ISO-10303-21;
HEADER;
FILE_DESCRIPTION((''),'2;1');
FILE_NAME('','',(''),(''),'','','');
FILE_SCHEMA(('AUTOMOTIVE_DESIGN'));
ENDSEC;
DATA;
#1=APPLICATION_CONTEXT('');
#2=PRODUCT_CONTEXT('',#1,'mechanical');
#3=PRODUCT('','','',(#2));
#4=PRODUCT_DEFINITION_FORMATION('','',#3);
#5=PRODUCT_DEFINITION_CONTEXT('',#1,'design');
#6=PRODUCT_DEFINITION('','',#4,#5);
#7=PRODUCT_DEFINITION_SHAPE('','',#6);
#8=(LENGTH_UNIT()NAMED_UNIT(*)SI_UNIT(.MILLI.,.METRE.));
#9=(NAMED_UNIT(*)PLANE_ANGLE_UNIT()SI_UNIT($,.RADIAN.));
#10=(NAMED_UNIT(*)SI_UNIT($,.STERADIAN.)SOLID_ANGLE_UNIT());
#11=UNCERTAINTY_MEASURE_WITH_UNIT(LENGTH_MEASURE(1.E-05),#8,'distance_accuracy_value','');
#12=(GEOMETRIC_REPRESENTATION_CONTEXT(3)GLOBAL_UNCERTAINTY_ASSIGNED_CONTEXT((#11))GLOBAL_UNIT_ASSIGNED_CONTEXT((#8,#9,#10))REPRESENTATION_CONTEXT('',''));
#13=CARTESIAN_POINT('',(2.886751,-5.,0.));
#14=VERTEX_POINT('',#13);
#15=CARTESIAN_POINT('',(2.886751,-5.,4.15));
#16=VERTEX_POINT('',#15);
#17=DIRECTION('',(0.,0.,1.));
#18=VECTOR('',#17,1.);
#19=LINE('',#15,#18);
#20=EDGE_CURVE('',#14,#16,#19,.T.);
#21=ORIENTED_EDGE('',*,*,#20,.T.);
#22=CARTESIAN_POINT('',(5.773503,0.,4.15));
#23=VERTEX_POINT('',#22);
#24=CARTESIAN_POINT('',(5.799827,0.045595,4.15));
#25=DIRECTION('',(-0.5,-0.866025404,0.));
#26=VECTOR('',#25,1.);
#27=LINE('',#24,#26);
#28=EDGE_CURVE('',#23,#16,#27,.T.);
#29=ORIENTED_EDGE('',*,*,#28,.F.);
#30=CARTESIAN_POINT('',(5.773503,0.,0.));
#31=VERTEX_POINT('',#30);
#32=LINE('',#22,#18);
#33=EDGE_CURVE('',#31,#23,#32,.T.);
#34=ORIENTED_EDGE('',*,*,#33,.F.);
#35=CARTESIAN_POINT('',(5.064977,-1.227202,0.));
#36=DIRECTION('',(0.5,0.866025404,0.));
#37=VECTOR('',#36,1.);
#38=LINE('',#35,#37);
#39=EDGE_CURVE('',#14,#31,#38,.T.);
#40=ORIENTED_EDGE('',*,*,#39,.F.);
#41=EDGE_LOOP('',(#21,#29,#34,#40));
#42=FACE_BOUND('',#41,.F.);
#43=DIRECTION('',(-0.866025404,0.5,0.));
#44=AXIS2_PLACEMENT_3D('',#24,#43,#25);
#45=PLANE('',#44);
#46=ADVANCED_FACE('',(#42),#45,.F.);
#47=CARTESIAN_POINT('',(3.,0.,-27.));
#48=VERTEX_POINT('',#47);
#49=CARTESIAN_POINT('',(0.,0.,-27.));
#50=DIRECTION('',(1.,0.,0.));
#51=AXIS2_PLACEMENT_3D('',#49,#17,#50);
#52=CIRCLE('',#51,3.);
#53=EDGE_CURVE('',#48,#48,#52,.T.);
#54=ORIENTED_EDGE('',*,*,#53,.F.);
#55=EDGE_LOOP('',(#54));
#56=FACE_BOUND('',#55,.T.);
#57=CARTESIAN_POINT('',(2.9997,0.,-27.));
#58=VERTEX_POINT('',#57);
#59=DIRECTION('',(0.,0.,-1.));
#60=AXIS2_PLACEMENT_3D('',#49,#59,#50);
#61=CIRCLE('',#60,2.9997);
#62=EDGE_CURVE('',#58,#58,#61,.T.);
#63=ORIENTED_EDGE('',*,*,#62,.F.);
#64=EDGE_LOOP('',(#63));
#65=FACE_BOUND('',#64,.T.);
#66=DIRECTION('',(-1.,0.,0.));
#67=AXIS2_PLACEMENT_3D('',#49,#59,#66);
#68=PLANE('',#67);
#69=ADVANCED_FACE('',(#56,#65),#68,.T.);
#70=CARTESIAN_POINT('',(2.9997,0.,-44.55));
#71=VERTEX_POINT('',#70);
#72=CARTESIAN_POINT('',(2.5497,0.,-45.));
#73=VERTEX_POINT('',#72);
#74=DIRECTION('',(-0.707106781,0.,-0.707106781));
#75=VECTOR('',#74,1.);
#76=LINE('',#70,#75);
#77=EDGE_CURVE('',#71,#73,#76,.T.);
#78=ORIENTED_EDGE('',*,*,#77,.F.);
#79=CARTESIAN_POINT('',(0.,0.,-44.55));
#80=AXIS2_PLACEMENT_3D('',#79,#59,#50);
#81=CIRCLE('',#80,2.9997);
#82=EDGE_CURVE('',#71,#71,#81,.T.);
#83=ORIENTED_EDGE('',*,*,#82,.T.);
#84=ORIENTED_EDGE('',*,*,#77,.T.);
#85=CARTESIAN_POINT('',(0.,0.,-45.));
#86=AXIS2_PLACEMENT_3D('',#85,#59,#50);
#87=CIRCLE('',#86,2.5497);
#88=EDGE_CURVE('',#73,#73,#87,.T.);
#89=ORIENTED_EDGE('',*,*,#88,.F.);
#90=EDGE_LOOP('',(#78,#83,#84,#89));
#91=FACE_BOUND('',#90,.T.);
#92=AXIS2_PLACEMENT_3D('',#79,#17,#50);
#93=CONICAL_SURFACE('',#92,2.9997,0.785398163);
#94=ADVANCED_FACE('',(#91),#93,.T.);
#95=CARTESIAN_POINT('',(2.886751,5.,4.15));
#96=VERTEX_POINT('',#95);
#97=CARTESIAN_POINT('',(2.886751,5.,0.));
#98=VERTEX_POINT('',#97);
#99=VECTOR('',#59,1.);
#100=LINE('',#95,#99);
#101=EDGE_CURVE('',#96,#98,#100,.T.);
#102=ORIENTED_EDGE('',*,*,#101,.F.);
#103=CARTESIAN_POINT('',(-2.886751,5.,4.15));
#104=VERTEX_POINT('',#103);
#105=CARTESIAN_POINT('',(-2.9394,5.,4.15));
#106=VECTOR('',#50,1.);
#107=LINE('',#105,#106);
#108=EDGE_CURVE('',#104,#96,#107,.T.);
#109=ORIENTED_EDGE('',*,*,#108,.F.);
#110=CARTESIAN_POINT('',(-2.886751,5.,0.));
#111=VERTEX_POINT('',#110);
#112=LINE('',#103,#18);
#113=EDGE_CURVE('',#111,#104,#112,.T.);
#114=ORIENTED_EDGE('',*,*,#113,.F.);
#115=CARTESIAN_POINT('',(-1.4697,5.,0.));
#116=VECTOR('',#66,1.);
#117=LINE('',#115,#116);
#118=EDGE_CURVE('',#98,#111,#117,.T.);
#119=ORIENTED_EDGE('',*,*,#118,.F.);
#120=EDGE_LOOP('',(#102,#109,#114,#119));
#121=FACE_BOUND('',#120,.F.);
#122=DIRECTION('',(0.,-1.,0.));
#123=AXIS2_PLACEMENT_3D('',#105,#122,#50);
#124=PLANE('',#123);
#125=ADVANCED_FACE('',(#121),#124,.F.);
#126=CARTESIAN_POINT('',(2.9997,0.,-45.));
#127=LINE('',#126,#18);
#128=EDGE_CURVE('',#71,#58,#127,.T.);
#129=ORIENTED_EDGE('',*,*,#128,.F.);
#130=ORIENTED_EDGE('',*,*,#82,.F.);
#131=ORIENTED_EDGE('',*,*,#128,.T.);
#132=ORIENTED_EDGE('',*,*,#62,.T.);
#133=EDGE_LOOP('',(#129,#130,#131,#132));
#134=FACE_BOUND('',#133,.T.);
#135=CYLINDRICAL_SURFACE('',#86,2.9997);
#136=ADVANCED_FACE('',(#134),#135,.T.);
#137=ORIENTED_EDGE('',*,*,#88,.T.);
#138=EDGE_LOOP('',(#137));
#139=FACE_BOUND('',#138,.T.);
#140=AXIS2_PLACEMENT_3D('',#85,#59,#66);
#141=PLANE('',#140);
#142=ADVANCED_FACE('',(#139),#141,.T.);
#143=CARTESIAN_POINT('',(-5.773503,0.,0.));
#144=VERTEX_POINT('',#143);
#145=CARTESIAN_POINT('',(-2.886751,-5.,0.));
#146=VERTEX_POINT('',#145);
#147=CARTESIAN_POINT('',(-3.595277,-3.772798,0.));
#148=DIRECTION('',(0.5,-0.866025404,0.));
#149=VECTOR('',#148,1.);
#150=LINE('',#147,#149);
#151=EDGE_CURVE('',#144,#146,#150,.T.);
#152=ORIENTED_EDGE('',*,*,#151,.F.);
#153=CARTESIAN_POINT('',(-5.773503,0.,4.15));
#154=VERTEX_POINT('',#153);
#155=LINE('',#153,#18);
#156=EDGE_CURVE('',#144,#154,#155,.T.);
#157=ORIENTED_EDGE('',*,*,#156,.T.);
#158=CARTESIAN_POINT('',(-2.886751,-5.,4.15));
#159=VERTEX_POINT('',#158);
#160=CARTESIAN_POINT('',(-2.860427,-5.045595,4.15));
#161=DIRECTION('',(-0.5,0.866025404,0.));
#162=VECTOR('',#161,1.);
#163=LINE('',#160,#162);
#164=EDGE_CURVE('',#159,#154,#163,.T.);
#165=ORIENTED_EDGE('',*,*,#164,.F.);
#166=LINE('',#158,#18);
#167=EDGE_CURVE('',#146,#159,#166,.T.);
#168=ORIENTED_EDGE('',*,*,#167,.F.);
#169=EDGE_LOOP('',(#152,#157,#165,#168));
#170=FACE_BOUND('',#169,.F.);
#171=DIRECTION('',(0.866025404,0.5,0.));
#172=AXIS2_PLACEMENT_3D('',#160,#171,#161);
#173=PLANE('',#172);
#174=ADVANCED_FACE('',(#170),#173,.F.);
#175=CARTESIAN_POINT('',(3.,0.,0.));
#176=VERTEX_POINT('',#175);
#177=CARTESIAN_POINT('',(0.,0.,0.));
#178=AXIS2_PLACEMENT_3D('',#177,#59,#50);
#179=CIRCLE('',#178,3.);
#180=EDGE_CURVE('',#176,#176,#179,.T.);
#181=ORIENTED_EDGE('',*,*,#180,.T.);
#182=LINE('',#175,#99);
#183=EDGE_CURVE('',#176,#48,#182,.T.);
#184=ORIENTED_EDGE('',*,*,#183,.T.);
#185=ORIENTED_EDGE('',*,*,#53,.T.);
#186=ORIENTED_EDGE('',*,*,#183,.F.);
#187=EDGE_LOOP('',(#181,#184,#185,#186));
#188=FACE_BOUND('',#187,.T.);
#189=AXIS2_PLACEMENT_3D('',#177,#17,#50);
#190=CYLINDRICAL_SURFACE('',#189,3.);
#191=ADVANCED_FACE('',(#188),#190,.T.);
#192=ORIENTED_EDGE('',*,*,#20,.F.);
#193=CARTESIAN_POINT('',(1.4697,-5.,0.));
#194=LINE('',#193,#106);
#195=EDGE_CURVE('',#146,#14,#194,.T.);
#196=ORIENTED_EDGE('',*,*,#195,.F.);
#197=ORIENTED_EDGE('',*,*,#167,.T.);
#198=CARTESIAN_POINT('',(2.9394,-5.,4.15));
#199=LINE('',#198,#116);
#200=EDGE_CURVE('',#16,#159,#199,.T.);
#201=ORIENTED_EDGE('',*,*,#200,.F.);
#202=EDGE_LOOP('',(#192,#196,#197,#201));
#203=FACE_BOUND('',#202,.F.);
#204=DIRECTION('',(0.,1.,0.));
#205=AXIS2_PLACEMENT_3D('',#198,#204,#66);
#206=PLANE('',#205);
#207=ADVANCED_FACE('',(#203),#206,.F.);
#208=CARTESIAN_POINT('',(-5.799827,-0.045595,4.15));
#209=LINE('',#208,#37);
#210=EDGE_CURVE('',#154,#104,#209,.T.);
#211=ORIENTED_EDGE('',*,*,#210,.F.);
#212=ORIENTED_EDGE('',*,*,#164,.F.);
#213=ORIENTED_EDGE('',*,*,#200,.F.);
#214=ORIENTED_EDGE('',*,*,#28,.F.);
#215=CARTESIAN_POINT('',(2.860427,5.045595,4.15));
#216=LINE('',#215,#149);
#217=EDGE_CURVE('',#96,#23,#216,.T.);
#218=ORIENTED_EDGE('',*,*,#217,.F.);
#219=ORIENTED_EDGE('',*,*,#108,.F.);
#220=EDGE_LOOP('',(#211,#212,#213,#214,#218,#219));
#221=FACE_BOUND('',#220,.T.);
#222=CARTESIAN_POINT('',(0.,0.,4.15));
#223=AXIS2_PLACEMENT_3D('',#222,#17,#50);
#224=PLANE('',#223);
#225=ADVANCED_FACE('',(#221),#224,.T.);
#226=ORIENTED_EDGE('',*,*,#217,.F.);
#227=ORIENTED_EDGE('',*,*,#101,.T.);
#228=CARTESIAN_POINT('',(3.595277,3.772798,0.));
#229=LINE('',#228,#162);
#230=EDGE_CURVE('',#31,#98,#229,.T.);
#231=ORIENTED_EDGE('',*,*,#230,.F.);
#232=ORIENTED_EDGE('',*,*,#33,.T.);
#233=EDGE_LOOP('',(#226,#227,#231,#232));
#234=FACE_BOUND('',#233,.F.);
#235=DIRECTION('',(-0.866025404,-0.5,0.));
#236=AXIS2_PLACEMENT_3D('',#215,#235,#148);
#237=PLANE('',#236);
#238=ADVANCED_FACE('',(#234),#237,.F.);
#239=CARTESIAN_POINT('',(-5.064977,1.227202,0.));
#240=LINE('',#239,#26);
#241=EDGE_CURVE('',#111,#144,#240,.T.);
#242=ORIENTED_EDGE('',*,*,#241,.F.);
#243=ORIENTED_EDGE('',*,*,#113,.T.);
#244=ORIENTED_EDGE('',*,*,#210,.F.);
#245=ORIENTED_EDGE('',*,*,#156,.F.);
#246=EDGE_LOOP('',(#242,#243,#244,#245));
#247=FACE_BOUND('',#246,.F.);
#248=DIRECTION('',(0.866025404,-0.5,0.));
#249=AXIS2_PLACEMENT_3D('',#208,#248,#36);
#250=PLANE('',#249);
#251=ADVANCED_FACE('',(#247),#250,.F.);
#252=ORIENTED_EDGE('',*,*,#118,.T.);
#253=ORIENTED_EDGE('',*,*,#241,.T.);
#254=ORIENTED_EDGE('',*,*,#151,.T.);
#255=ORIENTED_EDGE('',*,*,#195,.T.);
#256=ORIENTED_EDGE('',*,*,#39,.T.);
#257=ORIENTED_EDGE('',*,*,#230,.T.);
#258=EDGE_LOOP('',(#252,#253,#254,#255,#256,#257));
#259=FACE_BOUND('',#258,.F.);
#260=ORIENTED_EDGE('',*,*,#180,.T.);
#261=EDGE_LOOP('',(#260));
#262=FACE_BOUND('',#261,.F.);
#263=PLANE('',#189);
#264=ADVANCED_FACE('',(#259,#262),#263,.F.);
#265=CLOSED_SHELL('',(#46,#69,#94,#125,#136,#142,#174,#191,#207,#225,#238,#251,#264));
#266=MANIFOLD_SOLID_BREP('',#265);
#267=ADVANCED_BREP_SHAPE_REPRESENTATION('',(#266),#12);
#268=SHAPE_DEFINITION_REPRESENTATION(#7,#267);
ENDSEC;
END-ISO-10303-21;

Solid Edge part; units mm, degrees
sketch "Sketch1" plane through (0, 0, 0) normal (0, 0, 1) x (1, 0, 0)
  circle A0 centre (0, 0) radius 5.8
  dimension "D1" = 11.6
extrude "Protrusion1" add sketch "Sketch1" along normal blind 4.15
sketch "Sketch2" plane through (0, 0, 0) normal (0, 0, -1) x (1, 0, 0)
  circle A0 centre (0, 0) radius 3
extrude "Protrusion2" add sketch "Sketch2" along normal blind 45
sketch "Sketch3" plane through (0, 0, -45) normal (0, 0, -1) x (1, 0, 0)
  circle A0 centre (0, 0) radius 2.9997
extrude "Cutout1" cut sketch "Sketch3" against normal blind 18 flip side to cut
chamfer "Chamfer_1" distance 0.45 angle 45 1 edges at (-2.9997, 0, -45)
sketch "Sketch4" plane through (0, 0, 4.15) normal (0, 0, 1) x (1, 0, 0)
  line L0 (-2.9394, 5) -> (2.9394, 5)
  dimension "D1" = 10
extrude "Cutout2" cut sketch "Sketch4" against normal up to next material side at (0, 5.05, 4.15)
pattern_circular "Pattern1" count 6 over 360 about axis through (0, 0, 4.15) along (0, 0, 1) of "Cutout2"
properties part number "24104765"
